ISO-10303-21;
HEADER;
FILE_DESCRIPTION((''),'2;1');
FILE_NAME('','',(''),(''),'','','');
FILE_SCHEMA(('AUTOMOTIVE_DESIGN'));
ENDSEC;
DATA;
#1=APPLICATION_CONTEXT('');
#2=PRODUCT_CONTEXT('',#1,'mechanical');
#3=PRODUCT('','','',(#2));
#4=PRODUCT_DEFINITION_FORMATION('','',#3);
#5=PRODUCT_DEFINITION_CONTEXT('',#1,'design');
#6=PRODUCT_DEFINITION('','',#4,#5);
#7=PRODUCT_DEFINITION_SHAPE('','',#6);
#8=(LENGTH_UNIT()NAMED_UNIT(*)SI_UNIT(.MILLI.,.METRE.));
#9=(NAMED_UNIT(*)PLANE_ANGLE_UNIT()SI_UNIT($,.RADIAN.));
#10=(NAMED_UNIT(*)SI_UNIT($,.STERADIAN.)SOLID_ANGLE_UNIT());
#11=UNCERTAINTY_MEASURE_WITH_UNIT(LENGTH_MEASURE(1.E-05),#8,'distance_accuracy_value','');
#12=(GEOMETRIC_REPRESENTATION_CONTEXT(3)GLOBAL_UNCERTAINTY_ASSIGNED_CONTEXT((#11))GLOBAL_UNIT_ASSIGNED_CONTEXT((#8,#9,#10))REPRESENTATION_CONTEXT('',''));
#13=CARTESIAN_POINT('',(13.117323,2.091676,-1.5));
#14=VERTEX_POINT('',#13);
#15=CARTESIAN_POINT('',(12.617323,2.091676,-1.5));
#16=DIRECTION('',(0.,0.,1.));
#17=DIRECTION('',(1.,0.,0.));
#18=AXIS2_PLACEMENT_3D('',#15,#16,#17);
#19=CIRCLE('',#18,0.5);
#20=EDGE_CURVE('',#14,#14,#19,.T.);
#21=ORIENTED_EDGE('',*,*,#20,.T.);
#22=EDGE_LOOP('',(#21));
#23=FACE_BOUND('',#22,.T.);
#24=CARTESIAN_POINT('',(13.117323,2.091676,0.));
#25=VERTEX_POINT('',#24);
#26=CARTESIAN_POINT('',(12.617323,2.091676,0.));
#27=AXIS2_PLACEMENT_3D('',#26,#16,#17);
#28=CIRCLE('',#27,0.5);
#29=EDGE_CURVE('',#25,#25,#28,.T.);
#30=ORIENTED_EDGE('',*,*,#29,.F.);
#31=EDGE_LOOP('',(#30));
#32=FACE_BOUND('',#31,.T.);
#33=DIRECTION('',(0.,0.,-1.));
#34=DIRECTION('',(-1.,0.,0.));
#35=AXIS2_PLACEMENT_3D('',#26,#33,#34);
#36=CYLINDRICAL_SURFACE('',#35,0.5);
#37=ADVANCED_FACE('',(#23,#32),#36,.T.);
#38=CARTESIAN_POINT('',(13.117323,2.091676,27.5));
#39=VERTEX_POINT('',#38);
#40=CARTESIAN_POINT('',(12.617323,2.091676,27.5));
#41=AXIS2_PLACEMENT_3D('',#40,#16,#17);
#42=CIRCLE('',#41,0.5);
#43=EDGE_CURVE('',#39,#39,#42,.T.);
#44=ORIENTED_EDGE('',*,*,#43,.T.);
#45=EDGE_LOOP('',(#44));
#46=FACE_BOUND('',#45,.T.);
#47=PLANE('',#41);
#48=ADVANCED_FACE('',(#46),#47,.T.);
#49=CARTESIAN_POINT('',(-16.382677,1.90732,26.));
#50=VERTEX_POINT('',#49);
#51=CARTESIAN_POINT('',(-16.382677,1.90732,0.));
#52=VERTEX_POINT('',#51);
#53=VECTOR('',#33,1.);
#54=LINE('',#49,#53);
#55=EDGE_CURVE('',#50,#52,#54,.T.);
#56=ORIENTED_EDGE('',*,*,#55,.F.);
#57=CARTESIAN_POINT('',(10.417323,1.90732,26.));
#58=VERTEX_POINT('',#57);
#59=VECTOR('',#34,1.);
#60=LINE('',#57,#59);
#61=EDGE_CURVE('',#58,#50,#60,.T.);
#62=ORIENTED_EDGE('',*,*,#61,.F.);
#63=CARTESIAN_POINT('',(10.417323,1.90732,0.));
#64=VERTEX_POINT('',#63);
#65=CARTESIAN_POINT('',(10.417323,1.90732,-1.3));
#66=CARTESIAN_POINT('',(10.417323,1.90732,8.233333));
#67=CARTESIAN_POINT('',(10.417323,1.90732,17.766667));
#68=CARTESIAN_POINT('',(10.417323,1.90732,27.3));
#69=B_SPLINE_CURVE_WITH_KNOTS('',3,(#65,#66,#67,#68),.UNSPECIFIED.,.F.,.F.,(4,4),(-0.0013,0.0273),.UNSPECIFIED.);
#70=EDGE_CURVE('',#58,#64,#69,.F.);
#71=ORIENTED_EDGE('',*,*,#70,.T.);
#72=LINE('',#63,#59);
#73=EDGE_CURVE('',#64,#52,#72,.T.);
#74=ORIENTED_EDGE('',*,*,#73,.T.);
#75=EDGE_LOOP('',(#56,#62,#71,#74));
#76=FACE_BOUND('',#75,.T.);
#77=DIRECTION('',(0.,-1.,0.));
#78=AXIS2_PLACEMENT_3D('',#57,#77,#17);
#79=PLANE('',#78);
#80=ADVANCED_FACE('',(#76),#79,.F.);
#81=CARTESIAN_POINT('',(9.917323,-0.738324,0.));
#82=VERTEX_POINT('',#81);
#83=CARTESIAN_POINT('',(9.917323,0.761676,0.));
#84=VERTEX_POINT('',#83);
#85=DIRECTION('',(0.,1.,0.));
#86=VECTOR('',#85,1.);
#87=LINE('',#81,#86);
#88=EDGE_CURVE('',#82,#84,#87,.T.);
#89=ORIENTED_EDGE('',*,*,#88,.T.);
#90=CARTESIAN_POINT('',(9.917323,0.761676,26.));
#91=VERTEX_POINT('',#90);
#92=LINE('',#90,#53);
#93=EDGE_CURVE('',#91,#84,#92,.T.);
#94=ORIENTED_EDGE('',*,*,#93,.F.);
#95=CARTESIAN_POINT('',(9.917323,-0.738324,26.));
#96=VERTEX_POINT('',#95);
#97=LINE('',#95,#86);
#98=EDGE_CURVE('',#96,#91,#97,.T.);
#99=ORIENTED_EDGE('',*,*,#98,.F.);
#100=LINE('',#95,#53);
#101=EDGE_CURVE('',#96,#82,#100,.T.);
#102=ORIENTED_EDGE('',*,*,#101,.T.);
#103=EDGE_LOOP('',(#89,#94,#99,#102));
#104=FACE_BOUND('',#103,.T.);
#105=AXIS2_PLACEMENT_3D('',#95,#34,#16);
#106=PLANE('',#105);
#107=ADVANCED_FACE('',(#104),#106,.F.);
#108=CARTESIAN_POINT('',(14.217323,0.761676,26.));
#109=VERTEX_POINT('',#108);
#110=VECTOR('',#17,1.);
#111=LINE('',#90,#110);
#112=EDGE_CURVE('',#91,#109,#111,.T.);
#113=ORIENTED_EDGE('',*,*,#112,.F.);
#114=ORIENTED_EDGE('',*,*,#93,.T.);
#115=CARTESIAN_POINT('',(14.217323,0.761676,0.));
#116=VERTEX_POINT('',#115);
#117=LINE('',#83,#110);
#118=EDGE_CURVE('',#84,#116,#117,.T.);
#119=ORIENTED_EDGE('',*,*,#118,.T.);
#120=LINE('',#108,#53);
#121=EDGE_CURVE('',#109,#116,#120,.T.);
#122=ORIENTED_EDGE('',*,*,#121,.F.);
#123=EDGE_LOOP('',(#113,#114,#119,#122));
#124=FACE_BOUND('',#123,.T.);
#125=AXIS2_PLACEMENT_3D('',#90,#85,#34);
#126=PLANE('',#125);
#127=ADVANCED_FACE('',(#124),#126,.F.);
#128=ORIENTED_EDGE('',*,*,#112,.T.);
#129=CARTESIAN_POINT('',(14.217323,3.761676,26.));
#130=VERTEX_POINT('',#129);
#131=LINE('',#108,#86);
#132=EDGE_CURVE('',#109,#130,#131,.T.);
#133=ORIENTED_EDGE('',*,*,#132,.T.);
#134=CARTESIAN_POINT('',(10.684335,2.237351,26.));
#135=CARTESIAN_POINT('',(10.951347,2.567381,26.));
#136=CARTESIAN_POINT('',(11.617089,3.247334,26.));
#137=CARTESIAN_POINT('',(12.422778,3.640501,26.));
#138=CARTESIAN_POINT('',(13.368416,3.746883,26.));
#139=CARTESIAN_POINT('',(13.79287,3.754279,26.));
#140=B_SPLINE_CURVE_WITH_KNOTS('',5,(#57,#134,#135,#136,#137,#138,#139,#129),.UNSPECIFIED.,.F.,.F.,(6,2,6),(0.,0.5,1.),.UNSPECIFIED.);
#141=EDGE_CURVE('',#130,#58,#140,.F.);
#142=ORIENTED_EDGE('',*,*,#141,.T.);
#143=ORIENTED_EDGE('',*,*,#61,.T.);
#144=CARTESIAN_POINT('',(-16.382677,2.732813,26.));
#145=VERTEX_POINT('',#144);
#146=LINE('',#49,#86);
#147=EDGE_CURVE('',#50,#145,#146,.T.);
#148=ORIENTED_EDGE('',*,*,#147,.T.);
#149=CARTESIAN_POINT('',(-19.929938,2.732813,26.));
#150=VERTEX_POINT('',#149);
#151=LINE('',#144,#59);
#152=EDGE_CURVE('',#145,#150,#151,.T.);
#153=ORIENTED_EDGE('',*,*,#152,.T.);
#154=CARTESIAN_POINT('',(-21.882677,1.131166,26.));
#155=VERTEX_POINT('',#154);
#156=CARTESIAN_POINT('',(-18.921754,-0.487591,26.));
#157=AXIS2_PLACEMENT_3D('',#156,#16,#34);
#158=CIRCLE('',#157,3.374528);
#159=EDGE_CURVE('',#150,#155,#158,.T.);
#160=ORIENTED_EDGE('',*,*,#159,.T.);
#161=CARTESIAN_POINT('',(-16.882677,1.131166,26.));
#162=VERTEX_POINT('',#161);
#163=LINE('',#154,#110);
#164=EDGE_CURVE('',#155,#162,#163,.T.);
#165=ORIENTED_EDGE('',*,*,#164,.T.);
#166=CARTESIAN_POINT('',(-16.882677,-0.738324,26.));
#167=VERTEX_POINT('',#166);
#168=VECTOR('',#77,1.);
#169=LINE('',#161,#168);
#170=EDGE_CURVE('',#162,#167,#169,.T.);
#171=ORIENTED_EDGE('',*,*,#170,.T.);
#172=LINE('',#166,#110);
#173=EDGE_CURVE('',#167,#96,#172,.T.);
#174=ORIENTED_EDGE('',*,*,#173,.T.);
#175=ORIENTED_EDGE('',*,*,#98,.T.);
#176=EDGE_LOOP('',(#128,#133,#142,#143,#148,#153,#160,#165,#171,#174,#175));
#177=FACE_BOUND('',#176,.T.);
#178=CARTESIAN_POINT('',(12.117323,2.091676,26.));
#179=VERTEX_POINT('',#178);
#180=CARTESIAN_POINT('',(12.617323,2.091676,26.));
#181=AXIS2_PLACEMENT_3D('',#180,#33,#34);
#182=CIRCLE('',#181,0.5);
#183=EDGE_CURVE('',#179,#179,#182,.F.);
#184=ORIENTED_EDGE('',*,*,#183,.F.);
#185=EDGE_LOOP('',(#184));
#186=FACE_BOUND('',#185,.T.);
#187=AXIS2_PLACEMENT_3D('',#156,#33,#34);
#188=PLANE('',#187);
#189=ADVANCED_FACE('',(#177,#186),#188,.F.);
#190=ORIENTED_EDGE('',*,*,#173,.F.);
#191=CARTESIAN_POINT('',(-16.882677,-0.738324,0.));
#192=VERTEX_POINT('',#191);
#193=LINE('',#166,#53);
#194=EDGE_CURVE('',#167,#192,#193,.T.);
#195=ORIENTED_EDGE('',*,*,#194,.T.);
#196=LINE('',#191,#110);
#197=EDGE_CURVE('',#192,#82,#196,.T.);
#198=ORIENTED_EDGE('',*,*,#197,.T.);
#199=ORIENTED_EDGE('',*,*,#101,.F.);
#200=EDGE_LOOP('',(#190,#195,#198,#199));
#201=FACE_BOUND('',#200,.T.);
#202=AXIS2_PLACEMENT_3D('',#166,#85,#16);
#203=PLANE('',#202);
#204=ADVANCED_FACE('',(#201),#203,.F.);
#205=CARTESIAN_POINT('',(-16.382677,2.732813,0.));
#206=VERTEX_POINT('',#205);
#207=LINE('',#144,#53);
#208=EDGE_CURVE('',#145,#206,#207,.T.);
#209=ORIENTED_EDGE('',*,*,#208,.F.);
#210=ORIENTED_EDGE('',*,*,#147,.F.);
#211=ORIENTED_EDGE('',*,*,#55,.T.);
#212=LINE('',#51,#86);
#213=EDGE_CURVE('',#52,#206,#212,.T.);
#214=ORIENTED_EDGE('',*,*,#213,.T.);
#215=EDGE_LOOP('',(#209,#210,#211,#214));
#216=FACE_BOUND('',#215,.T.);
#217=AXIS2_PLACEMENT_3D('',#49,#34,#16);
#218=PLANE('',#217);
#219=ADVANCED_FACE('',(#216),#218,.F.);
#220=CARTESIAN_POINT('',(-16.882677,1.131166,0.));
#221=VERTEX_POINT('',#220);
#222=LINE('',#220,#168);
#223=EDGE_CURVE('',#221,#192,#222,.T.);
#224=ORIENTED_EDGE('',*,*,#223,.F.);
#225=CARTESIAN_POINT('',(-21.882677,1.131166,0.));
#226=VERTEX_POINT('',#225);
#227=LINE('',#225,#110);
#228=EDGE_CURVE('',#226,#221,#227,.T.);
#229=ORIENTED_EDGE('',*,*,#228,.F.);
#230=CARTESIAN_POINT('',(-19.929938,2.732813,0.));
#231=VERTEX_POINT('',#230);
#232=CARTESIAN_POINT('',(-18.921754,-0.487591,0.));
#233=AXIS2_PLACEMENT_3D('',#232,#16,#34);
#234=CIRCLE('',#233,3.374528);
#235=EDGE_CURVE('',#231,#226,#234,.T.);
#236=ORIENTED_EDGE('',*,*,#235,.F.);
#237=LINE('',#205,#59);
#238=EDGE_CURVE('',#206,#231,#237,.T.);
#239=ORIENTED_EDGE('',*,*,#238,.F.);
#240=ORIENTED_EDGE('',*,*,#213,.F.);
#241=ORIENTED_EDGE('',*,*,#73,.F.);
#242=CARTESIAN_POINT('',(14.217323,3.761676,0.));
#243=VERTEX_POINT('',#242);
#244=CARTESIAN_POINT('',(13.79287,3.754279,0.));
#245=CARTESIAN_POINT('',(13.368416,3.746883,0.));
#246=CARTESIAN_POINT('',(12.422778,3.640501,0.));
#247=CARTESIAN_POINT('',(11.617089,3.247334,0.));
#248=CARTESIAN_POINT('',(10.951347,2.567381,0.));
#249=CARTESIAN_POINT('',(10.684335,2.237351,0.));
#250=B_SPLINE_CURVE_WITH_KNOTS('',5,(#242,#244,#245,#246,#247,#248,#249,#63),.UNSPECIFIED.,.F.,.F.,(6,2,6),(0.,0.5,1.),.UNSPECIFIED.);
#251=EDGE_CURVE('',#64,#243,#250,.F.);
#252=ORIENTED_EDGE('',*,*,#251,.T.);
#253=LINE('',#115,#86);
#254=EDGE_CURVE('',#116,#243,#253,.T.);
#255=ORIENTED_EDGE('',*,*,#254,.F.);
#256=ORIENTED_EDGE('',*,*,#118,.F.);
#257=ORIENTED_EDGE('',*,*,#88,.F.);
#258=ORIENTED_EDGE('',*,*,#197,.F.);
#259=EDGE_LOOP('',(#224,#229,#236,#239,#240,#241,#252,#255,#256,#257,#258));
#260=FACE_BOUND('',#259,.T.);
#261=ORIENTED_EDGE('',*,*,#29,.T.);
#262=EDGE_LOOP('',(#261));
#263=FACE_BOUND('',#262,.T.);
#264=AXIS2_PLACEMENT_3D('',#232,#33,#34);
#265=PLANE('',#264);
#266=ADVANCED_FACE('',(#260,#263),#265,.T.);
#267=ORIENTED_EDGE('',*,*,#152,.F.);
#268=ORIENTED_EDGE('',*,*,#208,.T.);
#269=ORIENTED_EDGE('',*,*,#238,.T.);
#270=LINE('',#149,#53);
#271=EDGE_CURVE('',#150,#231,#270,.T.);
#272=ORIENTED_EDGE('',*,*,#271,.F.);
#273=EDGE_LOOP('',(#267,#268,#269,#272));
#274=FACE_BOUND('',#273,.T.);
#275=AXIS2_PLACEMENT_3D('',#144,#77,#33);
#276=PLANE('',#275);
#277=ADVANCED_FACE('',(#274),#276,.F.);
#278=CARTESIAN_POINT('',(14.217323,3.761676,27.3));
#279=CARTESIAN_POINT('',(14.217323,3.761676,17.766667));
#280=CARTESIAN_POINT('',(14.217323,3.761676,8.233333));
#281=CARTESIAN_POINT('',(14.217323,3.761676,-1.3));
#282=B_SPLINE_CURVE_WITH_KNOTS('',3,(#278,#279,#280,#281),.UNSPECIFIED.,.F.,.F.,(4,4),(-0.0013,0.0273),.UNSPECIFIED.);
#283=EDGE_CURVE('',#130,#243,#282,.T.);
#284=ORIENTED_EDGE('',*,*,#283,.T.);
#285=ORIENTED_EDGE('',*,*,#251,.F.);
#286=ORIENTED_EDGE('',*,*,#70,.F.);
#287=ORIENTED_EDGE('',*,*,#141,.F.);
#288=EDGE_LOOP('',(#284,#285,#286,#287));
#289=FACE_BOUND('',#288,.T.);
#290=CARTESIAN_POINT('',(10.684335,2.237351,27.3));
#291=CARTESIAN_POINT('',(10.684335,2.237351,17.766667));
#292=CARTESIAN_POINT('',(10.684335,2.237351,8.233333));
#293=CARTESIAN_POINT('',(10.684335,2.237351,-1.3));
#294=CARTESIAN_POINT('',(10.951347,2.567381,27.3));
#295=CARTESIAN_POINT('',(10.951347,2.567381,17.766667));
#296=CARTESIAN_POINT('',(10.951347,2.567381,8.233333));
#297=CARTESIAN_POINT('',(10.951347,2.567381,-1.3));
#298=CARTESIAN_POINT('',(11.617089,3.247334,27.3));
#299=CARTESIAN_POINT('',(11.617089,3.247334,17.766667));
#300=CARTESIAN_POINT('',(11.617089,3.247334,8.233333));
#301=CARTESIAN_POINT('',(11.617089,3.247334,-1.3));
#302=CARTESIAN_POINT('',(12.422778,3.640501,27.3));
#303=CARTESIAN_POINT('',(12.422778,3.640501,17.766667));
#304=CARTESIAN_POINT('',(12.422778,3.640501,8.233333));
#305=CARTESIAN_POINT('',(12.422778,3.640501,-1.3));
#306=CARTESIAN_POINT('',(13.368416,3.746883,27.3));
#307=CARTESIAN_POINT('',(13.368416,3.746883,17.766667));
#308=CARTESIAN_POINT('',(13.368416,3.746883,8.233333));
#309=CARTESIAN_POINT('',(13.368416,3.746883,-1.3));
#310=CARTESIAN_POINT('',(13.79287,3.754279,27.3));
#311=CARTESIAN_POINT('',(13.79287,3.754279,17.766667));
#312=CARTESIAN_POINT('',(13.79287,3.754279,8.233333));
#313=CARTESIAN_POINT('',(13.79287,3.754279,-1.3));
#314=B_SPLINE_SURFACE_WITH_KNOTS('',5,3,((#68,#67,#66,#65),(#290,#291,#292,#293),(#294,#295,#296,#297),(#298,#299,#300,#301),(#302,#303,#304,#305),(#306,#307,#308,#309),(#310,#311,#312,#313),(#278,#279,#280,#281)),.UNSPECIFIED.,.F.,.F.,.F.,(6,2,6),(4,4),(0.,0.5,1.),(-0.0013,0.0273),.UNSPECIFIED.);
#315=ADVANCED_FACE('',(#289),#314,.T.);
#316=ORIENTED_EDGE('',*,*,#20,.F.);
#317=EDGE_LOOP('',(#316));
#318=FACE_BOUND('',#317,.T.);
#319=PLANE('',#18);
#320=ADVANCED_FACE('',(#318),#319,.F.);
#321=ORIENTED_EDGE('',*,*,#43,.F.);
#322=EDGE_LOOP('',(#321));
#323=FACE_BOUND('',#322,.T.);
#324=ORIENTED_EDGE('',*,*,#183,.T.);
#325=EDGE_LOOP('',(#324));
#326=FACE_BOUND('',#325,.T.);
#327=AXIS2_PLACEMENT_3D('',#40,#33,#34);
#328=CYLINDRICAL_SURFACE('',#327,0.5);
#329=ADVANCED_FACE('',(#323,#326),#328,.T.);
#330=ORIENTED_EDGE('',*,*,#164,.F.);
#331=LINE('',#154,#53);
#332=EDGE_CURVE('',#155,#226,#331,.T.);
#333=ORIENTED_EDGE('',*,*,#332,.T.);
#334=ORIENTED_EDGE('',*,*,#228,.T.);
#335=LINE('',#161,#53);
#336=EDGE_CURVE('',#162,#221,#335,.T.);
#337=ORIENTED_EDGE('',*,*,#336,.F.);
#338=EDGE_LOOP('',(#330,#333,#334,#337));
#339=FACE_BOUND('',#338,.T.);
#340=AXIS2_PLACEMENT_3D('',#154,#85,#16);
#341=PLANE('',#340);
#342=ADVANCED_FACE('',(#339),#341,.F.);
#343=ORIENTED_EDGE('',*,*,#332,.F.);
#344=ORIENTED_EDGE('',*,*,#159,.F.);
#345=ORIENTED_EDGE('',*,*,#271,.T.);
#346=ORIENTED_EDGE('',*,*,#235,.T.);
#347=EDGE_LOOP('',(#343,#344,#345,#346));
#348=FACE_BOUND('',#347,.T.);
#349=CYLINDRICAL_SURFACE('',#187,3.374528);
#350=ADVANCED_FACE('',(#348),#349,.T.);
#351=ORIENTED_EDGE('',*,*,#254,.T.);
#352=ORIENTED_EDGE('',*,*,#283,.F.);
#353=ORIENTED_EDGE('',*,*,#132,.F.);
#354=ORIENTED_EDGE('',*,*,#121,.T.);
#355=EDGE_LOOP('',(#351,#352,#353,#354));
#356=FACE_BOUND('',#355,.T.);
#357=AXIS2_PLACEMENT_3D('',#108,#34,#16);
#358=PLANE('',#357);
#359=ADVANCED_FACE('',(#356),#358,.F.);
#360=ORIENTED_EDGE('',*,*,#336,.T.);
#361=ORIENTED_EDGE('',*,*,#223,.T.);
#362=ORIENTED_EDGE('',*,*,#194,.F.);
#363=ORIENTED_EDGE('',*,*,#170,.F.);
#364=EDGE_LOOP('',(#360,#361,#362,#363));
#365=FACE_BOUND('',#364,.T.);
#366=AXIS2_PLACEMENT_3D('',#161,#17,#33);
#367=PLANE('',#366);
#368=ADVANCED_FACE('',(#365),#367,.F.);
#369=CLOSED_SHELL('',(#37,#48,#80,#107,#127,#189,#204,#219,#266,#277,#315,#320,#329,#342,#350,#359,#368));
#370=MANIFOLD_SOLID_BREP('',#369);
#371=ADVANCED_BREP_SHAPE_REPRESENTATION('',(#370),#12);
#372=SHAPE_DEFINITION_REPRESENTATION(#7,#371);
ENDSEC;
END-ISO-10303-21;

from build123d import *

# Parameters (mm, degrees)
BOSS_EXTRUDE3_DEPTH = 26
FILLET6_DEPTH       = 26
SKETCH6_R           = 0.5
BOSS_EXTRUDE6_DEPTH = 1.5
LPATTERN1_COUNT     = 2
LPATTERN1_PITCH     = 27.5


with BuildPart() as part:
    # Sketch4 → Boss-Extrude3 (new body)
    with BuildSketch(Plane.XY):
        with BuildLine():
            Line((-16.882676832, -0.738323828), (9.917323168, -0.738323828))
            Line((9.917323168, -0.738323828), (9.917323168, 0.761676172))
            Line((9.917323168, 0.761676172), (14.217323168, 0.761676172))
            Line((14.217323168, 0.761676172), (14.217323168, 3.761676172))
            Line((14.217323168, 3.761676172), (10.417323168, 3.761676172))
            Line((10.417323168, 3.761676172), (10.417323168, 1.907320096))
            Line((10.417323168, 1.907320096), (-16.382676832, 1.907320096))
            Line((-16.382676832, 1.907320096), (-16.382676832, 2.732812963))
            Line((-16.382676832, 2.732812963), (-19.929938074, 2.732812963))
            ThreePointArc((-19.929938074, 2.732812963), (-21.061793852, 2.121559656), (-21.882676832, 1.131166179))
            Line((-21.882676832, 1.131166179), (-16.882676832, 1.131166179))
            Line((-16.882676832, 1.131166179), (-16.882676832, -0.738323828))
        make_face()
    extrude(amount=BOSS_EXTRUDE3_DEPTH)

    # Fillet6: read off the stored shape, not the designer's step
    # Fillet6 outline → Fillet6 (cut)
    with BuildSketch(Plane.XY):
        with BuildLine():
            Line((10.417323168, 3.761676172), (10.417323168, 1.907320096))
            add(Edge.make_bspline(
                [(10.417323168, 1.907320096), (10.684335221, 2.237350554), (10.951347275, 2.567381012), (11.617088855, 3.247333717), (12.422778443, 3.640500924), (13.36841604, 3.74688263), (13.792869604, 3.754279401), (14.217323168, 3.761676172)],
                knots=[0, 0, 0, 0, 0, 0, 0.5, 0.5, 1, 1, 1, 1, 1, 1], degree=5))
            Line((14.217323168, 3.761676172), (10.417323168, 3.761676172))
        make_face()
    extrude(amount=FILLET6_DEPTH, mode=Mode.SUBTRACT)

    # Sketch6 → Boss-Extrude6 (add)
    with BuildSketch(Plane.XY.offset(26)):
        with Locations(Location((12.617323168, 2.091676172, 0), (0, 0, 180))):
            Circle(SKETCH6_R)
    boss_extrude6 = extrude(amount=BOSS_EXTRUDE6_DEPTH)

    # LPattern1: Boss-Extrude6 ×2
    with Locations(*[(0, 0, -i * LPATTERN1_PITCH) for i in range(1, LPATTERN1_COUNT)]):
        add(boss_extrude6)


solid = part.part
